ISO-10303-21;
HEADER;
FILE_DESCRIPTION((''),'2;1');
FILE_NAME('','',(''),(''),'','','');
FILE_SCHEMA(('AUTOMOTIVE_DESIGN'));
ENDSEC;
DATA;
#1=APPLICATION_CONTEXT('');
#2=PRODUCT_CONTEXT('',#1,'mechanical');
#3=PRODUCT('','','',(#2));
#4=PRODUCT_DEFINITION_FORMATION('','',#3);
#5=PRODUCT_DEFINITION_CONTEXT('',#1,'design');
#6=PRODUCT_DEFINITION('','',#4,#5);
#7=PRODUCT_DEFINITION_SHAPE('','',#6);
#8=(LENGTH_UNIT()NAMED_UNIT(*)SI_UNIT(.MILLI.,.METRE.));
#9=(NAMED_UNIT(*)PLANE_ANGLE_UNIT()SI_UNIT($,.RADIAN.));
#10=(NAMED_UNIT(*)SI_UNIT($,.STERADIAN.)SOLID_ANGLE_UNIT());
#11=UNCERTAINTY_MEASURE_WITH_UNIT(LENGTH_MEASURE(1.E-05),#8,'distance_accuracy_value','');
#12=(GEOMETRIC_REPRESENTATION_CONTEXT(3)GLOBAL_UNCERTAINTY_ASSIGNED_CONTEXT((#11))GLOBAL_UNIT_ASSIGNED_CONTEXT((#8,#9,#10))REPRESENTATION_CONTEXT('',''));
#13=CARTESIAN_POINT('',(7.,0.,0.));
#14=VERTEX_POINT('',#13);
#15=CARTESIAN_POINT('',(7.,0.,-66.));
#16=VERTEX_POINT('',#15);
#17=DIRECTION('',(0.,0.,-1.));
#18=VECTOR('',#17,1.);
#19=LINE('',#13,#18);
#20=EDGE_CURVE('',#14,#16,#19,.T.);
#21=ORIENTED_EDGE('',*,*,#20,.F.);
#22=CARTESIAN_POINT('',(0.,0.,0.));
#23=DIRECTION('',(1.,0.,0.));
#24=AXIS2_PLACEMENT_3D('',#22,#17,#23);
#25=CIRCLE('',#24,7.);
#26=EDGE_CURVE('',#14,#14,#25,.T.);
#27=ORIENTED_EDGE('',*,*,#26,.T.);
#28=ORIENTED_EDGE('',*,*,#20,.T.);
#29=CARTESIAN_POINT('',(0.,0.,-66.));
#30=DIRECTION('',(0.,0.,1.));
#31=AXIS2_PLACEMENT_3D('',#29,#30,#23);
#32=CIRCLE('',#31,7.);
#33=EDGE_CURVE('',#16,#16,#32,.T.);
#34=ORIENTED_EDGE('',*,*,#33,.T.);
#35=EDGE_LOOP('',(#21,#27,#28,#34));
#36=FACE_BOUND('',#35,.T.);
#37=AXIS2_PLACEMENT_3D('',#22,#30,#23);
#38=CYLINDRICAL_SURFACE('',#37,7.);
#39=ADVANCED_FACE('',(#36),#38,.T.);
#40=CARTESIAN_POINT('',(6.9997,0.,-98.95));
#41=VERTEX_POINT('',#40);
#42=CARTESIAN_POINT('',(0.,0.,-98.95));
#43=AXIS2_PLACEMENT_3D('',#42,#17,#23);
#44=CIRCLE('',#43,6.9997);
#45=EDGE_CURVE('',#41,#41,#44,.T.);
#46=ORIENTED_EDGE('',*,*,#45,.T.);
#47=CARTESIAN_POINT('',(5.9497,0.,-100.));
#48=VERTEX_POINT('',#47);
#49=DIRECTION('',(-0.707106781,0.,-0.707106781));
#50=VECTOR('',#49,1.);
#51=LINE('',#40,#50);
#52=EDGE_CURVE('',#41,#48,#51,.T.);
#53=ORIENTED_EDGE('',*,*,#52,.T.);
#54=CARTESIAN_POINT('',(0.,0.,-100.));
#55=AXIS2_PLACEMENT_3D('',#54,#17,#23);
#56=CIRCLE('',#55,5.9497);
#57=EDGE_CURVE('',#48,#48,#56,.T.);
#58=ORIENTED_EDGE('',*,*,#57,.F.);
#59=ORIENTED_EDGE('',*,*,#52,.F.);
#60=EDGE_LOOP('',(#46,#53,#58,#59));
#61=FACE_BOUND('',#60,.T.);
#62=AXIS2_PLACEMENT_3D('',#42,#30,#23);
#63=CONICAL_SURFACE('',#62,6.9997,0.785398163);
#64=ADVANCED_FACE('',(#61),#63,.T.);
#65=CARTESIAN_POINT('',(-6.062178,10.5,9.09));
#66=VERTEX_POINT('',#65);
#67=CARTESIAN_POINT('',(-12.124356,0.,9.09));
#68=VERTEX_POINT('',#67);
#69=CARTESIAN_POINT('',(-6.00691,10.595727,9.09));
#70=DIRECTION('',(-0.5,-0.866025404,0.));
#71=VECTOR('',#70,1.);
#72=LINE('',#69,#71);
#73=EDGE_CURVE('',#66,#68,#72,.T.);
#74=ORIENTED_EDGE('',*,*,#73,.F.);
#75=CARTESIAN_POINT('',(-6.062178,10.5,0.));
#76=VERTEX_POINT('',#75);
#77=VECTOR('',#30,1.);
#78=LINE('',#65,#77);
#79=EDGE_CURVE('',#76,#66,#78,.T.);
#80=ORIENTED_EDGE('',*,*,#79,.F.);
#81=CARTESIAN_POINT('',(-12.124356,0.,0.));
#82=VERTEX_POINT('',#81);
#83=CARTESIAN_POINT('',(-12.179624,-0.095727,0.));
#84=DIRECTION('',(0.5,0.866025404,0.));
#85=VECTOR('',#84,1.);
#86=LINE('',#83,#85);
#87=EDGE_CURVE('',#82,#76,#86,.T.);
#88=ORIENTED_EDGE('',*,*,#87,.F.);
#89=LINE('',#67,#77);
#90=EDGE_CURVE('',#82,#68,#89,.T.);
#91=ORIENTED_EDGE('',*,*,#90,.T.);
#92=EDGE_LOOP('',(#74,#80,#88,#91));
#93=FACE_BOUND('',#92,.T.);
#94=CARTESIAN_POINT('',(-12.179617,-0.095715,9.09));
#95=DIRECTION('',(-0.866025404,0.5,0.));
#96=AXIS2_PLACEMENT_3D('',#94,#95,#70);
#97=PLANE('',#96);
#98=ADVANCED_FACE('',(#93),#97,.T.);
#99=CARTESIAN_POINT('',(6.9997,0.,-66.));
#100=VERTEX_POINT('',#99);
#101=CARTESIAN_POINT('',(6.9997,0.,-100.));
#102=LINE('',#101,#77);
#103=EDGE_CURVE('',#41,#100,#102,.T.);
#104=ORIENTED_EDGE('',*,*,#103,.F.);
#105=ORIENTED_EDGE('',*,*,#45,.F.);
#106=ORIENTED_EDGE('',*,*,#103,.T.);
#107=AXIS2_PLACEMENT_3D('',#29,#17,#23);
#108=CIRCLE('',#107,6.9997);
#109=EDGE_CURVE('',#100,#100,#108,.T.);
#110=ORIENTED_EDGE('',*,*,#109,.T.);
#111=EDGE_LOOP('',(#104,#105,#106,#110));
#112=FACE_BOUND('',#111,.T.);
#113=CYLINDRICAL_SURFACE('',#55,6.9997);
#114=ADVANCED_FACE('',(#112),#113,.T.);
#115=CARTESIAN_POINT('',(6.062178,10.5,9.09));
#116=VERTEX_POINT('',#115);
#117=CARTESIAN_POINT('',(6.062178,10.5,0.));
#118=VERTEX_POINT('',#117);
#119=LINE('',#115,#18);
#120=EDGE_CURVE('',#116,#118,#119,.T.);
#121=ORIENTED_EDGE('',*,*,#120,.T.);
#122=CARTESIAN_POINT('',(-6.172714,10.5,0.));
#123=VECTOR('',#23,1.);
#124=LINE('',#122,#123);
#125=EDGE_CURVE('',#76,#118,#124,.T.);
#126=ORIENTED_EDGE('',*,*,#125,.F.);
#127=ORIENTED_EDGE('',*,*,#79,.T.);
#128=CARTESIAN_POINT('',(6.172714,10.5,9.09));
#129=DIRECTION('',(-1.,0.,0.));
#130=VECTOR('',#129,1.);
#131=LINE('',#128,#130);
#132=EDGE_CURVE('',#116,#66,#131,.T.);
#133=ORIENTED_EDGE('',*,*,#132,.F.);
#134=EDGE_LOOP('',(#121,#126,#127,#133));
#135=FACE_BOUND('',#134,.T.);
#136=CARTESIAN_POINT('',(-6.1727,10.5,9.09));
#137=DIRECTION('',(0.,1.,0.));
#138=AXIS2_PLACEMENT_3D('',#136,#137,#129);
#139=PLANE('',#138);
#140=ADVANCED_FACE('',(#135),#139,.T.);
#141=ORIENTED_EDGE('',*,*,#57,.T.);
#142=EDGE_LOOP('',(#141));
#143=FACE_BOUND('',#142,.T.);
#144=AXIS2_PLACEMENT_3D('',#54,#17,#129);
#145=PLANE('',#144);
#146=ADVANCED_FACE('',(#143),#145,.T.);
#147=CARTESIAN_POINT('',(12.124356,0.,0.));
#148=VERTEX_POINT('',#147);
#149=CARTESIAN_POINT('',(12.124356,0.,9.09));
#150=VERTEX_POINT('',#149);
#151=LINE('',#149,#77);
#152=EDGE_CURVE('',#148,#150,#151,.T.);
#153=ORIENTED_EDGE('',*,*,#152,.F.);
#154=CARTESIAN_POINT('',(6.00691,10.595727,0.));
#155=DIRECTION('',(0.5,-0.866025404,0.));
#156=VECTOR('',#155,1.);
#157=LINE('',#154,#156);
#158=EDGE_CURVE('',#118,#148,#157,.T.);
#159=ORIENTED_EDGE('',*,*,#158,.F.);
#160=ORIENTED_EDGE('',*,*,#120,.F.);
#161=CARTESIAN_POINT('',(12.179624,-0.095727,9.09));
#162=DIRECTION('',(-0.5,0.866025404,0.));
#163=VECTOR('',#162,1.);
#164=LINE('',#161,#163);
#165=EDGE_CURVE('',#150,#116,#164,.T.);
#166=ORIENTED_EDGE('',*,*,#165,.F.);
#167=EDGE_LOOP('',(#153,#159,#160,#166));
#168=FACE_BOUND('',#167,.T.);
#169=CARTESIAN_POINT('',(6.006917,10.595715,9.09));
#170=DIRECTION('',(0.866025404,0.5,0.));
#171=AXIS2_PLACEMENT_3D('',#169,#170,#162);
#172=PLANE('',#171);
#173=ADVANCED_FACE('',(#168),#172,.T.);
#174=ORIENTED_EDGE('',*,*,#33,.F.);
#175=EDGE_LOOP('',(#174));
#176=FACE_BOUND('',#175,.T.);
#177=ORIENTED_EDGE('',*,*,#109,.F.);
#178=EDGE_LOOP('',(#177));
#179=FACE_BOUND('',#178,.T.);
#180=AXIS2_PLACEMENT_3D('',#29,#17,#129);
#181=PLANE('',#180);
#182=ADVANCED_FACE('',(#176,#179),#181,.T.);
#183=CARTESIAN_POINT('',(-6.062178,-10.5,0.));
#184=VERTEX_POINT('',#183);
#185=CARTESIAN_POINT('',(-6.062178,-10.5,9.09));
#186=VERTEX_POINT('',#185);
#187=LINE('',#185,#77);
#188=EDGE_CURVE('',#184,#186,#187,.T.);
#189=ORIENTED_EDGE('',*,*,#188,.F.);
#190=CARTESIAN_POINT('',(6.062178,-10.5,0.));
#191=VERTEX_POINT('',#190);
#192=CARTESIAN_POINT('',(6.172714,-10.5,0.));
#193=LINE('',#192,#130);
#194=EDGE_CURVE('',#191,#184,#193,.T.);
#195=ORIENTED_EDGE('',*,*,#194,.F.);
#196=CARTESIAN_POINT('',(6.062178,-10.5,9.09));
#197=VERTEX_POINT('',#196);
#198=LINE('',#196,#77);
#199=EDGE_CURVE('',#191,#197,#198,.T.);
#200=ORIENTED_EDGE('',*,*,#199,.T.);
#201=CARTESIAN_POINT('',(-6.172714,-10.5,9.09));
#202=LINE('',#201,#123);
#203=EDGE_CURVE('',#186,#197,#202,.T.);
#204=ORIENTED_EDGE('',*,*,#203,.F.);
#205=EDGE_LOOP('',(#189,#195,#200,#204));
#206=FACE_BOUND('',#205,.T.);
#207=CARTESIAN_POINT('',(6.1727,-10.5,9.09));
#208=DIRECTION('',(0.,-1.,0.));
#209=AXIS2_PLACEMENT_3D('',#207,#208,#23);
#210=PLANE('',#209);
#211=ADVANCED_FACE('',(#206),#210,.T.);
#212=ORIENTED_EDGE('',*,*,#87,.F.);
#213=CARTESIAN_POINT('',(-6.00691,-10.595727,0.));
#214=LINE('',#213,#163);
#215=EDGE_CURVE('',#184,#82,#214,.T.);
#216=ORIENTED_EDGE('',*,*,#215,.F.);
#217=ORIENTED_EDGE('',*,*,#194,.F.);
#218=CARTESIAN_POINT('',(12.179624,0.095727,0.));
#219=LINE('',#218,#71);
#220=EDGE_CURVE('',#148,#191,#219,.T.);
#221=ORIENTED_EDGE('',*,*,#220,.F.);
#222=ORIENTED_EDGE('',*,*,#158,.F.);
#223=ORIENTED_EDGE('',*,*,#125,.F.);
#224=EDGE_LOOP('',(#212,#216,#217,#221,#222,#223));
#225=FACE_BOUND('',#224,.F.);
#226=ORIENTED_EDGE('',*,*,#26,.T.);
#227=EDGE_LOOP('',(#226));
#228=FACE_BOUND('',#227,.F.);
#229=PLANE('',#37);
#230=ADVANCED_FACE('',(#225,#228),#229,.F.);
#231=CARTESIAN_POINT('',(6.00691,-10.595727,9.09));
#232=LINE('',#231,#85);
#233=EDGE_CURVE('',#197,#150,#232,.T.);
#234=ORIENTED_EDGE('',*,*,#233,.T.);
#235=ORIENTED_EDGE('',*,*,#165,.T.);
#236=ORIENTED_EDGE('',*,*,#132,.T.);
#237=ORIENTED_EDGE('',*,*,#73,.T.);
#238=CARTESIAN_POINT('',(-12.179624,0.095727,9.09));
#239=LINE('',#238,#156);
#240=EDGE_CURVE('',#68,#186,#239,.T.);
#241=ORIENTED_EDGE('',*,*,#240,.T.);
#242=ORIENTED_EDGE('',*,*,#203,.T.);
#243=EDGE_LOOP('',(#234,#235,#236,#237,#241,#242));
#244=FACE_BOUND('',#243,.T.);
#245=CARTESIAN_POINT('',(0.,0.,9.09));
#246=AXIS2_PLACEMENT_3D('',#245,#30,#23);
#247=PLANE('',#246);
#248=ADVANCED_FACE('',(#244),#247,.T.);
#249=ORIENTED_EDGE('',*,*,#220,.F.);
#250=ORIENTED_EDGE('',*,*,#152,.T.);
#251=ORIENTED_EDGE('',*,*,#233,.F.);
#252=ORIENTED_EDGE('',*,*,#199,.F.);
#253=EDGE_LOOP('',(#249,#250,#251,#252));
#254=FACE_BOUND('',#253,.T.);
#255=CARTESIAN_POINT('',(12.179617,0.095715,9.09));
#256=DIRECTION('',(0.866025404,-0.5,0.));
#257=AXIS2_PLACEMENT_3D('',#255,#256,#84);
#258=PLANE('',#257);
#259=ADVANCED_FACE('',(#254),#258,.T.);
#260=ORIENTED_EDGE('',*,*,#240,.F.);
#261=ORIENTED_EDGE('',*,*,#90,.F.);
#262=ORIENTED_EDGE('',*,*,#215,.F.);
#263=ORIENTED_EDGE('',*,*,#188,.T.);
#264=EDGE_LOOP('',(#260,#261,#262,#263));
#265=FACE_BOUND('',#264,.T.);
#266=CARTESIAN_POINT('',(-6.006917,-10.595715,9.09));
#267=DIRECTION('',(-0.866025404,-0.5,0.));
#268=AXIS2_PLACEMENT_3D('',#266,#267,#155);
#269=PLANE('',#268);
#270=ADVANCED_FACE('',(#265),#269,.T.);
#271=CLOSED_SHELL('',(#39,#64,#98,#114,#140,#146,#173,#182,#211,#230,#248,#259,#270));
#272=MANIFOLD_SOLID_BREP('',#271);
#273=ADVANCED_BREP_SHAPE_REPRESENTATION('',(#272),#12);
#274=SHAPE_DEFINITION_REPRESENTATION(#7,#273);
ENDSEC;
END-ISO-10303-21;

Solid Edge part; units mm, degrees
sketch "Sketch1" plane through (0, 0, 0) normal (0, 0, 1) x (1, 0, 0)
  circle A0 centre (0, 0) radius 12.18
  dimension "D1" = 24.36
extrude "Protrusion1" add sketch "Sketch1" along normal blind 9.09
sketch "Sketch2" plane through (0, 0, 0) normal (0, 0, -1) x (1, 0, 0)
  circle A0 centre (0, 0) radius 7
extrude "Protrusion2" add sketch "Sketch2" along normal blind 100
sketch "Sketch3" plane through (0, 0, -100) normal (0, 0, -1) x (1, 0, 0)
  circle A0 centre (0, 0) radius 6.9997
extrude "Cutout1" cut sketch "Sketch3" against normal blind 34 flip side to cut
chamfer "Chamfer_1" distance 1.05 angle 45 1 edges at (-6.9997, 0, -100)
sketch "Sketch4" plane through (0, 0, 9.09) normal (0, 0, 1) x (1, 0, 0)
  line L0 (-6.1727, 10.5) -> (6.1727, 10.5)
  dimension "D1" = 21
extrude "Cutout2" cut sketch "Sketch4" against normal up to next material side at (0, 10.55, 9.09)
pattern_circular "Pattern1" count 6 over 360 about axis through (0, 0, 9.09) along (0, 0, 1) of "Cutout2"
properties part number "24101439"
